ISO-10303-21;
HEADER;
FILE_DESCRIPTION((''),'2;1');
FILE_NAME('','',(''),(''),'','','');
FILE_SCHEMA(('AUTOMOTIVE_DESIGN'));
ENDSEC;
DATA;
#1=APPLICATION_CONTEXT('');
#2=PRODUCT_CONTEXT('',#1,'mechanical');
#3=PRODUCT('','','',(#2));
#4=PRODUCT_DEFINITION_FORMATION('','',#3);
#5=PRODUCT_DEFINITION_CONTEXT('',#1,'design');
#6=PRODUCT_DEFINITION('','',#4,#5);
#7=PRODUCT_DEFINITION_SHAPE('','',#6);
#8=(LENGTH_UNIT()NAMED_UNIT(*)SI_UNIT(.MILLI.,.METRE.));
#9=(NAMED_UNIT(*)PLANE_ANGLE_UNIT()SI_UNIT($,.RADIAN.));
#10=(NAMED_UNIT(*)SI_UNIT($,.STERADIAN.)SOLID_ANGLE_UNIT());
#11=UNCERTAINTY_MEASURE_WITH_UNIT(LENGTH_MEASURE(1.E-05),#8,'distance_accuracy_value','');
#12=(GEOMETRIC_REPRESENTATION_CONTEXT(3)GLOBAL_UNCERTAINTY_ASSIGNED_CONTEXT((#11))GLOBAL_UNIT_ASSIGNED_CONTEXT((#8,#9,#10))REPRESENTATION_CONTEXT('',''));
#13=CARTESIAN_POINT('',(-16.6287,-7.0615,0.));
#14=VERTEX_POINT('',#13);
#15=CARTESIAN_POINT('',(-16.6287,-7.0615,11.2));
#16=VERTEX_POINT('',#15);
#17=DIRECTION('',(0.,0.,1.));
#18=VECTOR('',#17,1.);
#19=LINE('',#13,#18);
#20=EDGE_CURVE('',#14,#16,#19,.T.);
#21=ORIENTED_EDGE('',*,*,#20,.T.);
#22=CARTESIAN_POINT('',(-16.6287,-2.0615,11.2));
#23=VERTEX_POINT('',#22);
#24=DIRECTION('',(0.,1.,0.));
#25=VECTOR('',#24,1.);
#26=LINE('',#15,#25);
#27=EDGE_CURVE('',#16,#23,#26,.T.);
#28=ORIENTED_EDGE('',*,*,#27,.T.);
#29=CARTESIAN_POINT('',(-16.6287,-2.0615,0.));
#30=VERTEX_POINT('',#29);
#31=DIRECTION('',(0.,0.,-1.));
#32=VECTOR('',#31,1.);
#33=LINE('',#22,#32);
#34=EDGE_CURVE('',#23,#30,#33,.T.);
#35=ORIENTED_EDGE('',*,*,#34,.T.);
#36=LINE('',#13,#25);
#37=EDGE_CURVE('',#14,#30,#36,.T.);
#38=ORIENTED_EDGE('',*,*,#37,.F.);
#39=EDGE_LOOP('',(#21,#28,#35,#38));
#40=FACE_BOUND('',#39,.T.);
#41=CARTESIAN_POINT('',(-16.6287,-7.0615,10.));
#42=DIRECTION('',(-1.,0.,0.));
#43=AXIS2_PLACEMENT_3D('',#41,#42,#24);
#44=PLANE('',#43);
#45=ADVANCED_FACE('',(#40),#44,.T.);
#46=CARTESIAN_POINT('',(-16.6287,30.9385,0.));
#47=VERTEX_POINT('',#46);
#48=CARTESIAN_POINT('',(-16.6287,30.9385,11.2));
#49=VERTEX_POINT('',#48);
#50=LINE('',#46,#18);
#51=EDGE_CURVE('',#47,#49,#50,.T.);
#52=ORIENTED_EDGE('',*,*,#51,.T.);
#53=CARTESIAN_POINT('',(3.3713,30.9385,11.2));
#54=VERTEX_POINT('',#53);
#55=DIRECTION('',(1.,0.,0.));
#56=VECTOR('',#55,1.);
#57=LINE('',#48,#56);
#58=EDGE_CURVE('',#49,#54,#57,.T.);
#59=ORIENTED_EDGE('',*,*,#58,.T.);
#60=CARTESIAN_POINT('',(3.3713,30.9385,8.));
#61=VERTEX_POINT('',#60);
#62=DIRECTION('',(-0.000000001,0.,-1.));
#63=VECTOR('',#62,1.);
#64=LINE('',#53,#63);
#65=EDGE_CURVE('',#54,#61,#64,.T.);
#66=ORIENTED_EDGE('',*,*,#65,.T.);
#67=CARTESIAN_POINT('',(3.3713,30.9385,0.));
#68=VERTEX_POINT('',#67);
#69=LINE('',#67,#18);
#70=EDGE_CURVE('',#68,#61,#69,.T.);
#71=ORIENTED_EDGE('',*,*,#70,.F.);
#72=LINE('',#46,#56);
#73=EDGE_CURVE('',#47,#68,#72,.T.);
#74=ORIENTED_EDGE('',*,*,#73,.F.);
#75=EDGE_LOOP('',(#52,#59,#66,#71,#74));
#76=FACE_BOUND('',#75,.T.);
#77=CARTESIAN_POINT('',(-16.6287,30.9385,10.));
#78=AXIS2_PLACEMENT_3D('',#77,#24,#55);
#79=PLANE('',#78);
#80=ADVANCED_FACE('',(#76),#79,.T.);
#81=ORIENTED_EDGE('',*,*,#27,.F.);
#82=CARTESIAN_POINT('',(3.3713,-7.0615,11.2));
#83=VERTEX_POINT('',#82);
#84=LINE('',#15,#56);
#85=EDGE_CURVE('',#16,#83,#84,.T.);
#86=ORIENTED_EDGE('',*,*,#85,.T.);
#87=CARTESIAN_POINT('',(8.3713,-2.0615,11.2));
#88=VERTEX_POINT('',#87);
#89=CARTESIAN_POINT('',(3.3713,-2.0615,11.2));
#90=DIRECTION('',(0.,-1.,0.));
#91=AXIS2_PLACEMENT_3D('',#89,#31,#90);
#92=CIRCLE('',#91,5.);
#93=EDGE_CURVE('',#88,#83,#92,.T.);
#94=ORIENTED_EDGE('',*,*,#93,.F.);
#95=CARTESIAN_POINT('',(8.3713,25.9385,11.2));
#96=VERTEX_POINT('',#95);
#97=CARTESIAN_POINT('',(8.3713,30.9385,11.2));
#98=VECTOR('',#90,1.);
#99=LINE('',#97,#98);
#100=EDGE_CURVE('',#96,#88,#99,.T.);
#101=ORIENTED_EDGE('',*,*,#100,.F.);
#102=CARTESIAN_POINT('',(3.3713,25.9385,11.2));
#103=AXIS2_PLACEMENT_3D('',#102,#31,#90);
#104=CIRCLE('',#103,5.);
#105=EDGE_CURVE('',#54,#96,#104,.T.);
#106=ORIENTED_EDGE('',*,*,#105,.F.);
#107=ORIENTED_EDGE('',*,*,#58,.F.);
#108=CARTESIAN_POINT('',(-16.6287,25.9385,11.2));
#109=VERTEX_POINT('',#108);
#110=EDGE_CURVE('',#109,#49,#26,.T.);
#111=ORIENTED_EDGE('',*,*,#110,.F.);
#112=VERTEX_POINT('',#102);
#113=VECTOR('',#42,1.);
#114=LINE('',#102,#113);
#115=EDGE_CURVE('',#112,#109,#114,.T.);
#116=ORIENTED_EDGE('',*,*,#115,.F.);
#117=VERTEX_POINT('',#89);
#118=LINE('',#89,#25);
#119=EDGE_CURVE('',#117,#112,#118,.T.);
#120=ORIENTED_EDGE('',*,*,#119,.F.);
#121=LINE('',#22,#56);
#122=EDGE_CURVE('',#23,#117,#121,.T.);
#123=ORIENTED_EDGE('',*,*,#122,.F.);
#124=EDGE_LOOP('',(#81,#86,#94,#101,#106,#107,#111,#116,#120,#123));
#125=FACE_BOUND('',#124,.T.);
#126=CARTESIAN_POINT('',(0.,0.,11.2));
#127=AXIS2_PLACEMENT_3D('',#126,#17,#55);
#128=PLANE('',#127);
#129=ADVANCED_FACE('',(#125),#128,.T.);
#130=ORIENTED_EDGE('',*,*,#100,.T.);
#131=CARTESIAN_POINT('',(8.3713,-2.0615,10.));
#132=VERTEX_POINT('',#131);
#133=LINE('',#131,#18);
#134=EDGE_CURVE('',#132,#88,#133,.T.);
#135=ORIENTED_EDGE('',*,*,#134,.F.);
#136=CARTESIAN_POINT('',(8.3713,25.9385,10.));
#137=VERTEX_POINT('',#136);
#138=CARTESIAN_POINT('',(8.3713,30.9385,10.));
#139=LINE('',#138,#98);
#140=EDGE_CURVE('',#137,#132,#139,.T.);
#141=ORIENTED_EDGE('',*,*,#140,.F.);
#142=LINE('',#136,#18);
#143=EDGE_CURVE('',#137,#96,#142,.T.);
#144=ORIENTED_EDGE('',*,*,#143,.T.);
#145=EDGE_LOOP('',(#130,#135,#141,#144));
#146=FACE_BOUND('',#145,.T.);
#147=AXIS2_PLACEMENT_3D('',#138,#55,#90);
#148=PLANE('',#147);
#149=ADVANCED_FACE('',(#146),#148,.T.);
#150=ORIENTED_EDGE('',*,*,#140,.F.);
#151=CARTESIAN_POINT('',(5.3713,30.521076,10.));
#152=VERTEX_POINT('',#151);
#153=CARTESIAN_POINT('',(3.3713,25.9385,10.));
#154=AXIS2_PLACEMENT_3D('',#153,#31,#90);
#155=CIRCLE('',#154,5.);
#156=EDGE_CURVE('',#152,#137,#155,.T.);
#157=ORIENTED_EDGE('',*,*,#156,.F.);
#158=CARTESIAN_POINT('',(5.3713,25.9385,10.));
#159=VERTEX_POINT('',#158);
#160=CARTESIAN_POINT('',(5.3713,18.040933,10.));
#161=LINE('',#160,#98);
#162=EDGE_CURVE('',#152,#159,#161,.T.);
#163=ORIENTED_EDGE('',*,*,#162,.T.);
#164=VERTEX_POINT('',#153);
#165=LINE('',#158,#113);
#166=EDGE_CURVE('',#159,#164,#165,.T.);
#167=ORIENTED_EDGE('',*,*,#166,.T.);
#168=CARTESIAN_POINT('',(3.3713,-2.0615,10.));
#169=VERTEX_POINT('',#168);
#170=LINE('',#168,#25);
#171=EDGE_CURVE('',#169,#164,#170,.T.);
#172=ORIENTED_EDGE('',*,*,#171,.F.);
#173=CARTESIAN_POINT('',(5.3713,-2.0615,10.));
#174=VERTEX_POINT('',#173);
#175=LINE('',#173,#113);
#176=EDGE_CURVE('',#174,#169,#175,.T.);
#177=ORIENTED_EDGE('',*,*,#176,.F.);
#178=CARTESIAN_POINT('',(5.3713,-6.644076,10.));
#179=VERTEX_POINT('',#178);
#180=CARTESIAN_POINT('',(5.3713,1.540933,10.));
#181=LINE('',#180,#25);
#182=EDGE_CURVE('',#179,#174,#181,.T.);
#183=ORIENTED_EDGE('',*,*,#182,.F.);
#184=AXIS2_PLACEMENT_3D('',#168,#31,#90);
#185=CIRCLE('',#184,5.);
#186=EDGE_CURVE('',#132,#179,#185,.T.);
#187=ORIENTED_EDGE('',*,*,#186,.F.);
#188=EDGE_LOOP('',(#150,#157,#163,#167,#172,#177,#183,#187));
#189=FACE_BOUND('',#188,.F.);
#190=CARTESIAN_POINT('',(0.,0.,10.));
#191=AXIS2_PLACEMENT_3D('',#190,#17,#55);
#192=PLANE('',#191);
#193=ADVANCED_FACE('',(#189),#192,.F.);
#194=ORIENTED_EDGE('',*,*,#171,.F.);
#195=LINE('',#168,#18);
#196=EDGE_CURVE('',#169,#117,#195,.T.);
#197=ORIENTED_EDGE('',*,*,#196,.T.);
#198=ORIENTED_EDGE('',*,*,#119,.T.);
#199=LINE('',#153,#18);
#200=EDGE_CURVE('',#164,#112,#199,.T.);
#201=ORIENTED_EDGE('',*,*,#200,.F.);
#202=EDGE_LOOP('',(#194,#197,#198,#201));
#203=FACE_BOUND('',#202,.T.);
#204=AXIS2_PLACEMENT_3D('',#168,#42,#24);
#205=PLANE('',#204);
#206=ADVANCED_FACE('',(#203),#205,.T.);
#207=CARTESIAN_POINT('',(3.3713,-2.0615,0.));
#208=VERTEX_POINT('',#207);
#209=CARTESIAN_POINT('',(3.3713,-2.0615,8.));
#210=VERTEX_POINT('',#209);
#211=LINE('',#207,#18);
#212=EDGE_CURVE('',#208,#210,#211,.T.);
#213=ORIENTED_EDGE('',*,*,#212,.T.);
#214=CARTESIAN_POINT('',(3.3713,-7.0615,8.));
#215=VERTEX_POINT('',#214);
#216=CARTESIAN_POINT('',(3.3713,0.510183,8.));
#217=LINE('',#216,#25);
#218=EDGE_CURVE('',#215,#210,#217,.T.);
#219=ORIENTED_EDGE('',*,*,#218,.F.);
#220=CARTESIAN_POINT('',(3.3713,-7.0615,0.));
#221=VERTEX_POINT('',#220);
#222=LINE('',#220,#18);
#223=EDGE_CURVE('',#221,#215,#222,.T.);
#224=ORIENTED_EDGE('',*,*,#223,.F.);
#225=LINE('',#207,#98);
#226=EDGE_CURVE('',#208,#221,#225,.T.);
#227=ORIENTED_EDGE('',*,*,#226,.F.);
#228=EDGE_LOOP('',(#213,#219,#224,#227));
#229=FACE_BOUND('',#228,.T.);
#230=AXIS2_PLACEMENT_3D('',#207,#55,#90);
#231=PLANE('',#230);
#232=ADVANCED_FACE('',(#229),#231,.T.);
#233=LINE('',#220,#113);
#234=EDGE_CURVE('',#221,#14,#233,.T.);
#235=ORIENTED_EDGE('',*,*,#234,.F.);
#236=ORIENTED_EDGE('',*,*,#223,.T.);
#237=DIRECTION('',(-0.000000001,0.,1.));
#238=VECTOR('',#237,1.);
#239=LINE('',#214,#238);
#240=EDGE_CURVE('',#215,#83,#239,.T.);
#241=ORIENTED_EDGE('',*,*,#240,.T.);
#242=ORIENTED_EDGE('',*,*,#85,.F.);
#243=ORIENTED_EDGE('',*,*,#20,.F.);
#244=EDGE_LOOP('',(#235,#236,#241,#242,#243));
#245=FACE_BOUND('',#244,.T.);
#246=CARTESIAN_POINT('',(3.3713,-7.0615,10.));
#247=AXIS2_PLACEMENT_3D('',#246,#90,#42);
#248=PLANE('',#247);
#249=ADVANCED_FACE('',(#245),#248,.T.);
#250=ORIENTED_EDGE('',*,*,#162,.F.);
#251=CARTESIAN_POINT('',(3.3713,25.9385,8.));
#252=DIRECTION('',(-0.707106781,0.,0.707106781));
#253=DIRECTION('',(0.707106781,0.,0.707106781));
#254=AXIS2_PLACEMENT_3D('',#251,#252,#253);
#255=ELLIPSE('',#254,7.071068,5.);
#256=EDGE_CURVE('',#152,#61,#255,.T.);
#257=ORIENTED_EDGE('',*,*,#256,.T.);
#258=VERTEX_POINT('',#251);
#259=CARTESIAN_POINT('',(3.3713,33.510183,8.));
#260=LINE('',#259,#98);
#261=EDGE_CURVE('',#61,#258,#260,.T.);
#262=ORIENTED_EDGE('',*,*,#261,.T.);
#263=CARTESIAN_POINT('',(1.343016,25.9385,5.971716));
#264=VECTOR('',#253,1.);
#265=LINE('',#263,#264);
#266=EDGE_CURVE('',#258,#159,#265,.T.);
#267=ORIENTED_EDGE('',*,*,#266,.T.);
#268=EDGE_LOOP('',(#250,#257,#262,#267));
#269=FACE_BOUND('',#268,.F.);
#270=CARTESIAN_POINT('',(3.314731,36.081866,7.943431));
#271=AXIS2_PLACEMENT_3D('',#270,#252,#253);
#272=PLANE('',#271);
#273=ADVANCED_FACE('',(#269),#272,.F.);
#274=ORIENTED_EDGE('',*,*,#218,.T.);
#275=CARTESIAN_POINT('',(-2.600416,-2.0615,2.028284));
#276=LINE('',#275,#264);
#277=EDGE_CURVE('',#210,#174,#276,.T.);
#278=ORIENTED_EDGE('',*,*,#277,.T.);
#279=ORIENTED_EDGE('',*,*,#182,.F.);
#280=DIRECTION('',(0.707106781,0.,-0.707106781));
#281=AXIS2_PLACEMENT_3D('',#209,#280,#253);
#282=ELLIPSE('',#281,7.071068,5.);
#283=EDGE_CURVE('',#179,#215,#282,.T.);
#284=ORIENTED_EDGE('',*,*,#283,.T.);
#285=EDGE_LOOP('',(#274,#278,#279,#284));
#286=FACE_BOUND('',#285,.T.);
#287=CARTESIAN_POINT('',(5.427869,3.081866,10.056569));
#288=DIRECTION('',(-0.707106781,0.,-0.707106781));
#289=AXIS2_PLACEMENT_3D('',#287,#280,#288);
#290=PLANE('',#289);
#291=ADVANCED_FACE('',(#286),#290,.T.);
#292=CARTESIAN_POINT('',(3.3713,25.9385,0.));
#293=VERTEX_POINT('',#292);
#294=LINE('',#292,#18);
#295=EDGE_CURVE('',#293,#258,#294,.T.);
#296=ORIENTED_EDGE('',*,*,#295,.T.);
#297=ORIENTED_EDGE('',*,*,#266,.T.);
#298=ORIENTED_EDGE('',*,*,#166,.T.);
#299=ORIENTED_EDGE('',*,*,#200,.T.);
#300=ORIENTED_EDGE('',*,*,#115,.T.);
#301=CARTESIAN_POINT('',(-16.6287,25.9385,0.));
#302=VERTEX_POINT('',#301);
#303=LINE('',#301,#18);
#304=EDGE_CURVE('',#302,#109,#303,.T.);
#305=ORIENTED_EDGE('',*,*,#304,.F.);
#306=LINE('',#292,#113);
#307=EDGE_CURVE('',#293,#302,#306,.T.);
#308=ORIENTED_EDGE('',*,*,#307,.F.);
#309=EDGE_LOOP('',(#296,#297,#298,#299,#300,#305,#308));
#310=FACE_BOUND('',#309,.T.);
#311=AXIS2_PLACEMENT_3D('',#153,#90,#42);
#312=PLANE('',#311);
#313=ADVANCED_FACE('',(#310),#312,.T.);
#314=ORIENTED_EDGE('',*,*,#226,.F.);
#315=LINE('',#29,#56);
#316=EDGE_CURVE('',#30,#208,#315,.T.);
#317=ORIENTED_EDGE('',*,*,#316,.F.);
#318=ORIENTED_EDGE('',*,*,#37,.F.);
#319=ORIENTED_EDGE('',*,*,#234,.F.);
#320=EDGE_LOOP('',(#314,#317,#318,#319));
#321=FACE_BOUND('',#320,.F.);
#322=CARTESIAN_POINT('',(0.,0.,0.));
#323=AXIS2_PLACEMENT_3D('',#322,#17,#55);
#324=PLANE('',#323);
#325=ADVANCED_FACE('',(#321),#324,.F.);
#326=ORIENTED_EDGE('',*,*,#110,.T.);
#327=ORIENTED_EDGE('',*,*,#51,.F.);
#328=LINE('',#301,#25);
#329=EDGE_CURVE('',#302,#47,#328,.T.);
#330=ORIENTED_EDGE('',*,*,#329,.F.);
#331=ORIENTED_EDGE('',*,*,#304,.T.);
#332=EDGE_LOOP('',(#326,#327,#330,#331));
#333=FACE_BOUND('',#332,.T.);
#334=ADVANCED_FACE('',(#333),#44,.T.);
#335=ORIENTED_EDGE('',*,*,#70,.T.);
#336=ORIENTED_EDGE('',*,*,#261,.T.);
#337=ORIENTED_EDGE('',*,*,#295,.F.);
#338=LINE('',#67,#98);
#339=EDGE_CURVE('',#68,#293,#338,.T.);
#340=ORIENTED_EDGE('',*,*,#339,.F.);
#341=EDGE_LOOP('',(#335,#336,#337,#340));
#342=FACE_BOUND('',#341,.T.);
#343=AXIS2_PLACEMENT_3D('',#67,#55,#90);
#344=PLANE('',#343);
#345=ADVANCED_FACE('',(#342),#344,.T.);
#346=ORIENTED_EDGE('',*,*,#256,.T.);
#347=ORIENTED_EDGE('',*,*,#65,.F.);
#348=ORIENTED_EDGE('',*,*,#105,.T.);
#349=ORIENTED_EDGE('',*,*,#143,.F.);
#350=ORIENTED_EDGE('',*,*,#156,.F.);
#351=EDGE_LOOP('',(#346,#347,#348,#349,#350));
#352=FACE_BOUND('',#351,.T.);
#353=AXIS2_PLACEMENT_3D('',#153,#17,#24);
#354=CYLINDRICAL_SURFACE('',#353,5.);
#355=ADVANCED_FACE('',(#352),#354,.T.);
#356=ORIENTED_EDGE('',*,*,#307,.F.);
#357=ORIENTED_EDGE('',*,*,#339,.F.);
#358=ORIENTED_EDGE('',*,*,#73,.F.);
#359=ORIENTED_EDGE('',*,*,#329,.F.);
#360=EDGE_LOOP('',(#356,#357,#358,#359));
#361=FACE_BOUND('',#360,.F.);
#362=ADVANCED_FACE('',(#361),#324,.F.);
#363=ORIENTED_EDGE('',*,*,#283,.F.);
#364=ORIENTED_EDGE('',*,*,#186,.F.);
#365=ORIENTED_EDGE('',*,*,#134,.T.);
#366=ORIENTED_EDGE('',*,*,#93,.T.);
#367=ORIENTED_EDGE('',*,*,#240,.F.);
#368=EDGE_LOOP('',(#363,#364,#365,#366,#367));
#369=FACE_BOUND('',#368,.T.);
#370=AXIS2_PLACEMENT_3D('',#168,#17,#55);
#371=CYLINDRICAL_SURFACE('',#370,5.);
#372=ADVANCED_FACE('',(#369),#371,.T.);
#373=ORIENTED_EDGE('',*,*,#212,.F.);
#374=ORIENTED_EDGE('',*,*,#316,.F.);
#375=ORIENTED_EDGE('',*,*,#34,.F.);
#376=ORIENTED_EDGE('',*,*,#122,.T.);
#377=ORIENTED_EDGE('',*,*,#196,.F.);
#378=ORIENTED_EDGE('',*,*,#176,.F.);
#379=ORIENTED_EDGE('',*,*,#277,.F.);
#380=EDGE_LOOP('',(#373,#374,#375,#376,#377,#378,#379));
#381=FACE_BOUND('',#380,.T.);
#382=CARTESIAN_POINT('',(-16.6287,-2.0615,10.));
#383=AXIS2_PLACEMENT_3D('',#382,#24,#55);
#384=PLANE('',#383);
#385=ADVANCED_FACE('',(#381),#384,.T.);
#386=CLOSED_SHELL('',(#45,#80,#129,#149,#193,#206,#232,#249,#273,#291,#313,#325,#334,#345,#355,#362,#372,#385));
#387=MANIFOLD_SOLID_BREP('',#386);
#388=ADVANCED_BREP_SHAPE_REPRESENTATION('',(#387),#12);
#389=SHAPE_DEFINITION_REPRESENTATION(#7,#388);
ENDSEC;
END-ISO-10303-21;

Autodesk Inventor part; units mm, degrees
ref_plane "YZ Plane" through (0, 0, 0) normal (1, 0, 0) x (0, 1, 0)
ref_plane "XZ Plane" through (0, 0, 0) normal (0, 1, 0) x (-1, 0, 0)
ref_plane "XY Plane" through (0, 0, 0) normal (0, 0, 1) x (1, 0, 0)
sketch "Sketch1" plane through (0, 0, 0) normal (0, 0, 1) x (1, 0, 0)
  line L0 (-16.6287, 30.9385) -> (3.3713, 30.9385)
  line L1 (3.3713, 30.9385) -> (3.3713, 25.9385)
  line L2 (3.3713, 25.9385) -> (-16.6287, 25.9385)
  line L3 (-16.6287, 25.9385) -> (-16.6287, 30.9385)
  line L4 (-16.6287, -2.0615) -> (3.3713, -2.0615)
  line L5 (3.3713, -2.0615) -> (3.3713, -7.0615)
  line L6 (3.3713, -7.0615) -> (-16.6287, -7.0615)
  line L7 (-16.6287, -7.0615) -> (-16.6287, -2.0615)
  point P0 (0, 0)
  dimension "d0" = 20
  dimension "d1" = 5
  dimension "d2" = 5
  dimension "d3" = 20
  dimension "d4" = 38
extrude "Extrusion1" add sketch "Sketch1" along normal blind 10
sketch "Sketch2" plane through (0, 0, 10) normal (0, 0, 1) x (1, 0, 0)
  line L0 (-16.6287, 30.9385) -> (8.3713, 30.9385)
  line L1 (8.3713, 30.9385) -> (8.3713, -7.0615)
  line L2 (8.3713, -7.0615) -> (-16.6287, -7.0615)
  line L3 (-16.6287, -7.0615) -> (-16.6287, 30.9385)
  line L4 (-16.6287, -7.0615) -> (3.3713, -7.0615) projected
  point P0 (0, 0)
  dimension "d7" = 25
extrude "Extrusion2" add sketch "Sketch2" along normal blind 1.2
fillet "Fillet1" radius 5 2 edges at (8.3713, 30.9385, 10.6) (8.3713, -7.0615, 10.6)
chamfer "Chamfer1" distance 2 angle 45 2 edges at (3.3713, -4.5615, 10) (3.3713, 28.4385, 10)
sketch "Sketch3" plane through (0, 0, 10) normal (0, 0, -1) x (-1, 0, 0)
  line L0 (16.6287, -2.0615) -> (-3.3713, -2.0615)
  line L1 (-3.3713, -2.0615) -> (-3.3713, 25.9385)
  line L2 (-3.3713, 25.9385) -> (16.6287, 25.9385)
  line L3 (16.6287, 25.9385) -> (16.6287, -2.0615)
  point P0 (0, 0)
extrude "Extrusion3" cut sketch "Sketch3" against normal blind 1.2
properties part number "Fuse Box Support"
